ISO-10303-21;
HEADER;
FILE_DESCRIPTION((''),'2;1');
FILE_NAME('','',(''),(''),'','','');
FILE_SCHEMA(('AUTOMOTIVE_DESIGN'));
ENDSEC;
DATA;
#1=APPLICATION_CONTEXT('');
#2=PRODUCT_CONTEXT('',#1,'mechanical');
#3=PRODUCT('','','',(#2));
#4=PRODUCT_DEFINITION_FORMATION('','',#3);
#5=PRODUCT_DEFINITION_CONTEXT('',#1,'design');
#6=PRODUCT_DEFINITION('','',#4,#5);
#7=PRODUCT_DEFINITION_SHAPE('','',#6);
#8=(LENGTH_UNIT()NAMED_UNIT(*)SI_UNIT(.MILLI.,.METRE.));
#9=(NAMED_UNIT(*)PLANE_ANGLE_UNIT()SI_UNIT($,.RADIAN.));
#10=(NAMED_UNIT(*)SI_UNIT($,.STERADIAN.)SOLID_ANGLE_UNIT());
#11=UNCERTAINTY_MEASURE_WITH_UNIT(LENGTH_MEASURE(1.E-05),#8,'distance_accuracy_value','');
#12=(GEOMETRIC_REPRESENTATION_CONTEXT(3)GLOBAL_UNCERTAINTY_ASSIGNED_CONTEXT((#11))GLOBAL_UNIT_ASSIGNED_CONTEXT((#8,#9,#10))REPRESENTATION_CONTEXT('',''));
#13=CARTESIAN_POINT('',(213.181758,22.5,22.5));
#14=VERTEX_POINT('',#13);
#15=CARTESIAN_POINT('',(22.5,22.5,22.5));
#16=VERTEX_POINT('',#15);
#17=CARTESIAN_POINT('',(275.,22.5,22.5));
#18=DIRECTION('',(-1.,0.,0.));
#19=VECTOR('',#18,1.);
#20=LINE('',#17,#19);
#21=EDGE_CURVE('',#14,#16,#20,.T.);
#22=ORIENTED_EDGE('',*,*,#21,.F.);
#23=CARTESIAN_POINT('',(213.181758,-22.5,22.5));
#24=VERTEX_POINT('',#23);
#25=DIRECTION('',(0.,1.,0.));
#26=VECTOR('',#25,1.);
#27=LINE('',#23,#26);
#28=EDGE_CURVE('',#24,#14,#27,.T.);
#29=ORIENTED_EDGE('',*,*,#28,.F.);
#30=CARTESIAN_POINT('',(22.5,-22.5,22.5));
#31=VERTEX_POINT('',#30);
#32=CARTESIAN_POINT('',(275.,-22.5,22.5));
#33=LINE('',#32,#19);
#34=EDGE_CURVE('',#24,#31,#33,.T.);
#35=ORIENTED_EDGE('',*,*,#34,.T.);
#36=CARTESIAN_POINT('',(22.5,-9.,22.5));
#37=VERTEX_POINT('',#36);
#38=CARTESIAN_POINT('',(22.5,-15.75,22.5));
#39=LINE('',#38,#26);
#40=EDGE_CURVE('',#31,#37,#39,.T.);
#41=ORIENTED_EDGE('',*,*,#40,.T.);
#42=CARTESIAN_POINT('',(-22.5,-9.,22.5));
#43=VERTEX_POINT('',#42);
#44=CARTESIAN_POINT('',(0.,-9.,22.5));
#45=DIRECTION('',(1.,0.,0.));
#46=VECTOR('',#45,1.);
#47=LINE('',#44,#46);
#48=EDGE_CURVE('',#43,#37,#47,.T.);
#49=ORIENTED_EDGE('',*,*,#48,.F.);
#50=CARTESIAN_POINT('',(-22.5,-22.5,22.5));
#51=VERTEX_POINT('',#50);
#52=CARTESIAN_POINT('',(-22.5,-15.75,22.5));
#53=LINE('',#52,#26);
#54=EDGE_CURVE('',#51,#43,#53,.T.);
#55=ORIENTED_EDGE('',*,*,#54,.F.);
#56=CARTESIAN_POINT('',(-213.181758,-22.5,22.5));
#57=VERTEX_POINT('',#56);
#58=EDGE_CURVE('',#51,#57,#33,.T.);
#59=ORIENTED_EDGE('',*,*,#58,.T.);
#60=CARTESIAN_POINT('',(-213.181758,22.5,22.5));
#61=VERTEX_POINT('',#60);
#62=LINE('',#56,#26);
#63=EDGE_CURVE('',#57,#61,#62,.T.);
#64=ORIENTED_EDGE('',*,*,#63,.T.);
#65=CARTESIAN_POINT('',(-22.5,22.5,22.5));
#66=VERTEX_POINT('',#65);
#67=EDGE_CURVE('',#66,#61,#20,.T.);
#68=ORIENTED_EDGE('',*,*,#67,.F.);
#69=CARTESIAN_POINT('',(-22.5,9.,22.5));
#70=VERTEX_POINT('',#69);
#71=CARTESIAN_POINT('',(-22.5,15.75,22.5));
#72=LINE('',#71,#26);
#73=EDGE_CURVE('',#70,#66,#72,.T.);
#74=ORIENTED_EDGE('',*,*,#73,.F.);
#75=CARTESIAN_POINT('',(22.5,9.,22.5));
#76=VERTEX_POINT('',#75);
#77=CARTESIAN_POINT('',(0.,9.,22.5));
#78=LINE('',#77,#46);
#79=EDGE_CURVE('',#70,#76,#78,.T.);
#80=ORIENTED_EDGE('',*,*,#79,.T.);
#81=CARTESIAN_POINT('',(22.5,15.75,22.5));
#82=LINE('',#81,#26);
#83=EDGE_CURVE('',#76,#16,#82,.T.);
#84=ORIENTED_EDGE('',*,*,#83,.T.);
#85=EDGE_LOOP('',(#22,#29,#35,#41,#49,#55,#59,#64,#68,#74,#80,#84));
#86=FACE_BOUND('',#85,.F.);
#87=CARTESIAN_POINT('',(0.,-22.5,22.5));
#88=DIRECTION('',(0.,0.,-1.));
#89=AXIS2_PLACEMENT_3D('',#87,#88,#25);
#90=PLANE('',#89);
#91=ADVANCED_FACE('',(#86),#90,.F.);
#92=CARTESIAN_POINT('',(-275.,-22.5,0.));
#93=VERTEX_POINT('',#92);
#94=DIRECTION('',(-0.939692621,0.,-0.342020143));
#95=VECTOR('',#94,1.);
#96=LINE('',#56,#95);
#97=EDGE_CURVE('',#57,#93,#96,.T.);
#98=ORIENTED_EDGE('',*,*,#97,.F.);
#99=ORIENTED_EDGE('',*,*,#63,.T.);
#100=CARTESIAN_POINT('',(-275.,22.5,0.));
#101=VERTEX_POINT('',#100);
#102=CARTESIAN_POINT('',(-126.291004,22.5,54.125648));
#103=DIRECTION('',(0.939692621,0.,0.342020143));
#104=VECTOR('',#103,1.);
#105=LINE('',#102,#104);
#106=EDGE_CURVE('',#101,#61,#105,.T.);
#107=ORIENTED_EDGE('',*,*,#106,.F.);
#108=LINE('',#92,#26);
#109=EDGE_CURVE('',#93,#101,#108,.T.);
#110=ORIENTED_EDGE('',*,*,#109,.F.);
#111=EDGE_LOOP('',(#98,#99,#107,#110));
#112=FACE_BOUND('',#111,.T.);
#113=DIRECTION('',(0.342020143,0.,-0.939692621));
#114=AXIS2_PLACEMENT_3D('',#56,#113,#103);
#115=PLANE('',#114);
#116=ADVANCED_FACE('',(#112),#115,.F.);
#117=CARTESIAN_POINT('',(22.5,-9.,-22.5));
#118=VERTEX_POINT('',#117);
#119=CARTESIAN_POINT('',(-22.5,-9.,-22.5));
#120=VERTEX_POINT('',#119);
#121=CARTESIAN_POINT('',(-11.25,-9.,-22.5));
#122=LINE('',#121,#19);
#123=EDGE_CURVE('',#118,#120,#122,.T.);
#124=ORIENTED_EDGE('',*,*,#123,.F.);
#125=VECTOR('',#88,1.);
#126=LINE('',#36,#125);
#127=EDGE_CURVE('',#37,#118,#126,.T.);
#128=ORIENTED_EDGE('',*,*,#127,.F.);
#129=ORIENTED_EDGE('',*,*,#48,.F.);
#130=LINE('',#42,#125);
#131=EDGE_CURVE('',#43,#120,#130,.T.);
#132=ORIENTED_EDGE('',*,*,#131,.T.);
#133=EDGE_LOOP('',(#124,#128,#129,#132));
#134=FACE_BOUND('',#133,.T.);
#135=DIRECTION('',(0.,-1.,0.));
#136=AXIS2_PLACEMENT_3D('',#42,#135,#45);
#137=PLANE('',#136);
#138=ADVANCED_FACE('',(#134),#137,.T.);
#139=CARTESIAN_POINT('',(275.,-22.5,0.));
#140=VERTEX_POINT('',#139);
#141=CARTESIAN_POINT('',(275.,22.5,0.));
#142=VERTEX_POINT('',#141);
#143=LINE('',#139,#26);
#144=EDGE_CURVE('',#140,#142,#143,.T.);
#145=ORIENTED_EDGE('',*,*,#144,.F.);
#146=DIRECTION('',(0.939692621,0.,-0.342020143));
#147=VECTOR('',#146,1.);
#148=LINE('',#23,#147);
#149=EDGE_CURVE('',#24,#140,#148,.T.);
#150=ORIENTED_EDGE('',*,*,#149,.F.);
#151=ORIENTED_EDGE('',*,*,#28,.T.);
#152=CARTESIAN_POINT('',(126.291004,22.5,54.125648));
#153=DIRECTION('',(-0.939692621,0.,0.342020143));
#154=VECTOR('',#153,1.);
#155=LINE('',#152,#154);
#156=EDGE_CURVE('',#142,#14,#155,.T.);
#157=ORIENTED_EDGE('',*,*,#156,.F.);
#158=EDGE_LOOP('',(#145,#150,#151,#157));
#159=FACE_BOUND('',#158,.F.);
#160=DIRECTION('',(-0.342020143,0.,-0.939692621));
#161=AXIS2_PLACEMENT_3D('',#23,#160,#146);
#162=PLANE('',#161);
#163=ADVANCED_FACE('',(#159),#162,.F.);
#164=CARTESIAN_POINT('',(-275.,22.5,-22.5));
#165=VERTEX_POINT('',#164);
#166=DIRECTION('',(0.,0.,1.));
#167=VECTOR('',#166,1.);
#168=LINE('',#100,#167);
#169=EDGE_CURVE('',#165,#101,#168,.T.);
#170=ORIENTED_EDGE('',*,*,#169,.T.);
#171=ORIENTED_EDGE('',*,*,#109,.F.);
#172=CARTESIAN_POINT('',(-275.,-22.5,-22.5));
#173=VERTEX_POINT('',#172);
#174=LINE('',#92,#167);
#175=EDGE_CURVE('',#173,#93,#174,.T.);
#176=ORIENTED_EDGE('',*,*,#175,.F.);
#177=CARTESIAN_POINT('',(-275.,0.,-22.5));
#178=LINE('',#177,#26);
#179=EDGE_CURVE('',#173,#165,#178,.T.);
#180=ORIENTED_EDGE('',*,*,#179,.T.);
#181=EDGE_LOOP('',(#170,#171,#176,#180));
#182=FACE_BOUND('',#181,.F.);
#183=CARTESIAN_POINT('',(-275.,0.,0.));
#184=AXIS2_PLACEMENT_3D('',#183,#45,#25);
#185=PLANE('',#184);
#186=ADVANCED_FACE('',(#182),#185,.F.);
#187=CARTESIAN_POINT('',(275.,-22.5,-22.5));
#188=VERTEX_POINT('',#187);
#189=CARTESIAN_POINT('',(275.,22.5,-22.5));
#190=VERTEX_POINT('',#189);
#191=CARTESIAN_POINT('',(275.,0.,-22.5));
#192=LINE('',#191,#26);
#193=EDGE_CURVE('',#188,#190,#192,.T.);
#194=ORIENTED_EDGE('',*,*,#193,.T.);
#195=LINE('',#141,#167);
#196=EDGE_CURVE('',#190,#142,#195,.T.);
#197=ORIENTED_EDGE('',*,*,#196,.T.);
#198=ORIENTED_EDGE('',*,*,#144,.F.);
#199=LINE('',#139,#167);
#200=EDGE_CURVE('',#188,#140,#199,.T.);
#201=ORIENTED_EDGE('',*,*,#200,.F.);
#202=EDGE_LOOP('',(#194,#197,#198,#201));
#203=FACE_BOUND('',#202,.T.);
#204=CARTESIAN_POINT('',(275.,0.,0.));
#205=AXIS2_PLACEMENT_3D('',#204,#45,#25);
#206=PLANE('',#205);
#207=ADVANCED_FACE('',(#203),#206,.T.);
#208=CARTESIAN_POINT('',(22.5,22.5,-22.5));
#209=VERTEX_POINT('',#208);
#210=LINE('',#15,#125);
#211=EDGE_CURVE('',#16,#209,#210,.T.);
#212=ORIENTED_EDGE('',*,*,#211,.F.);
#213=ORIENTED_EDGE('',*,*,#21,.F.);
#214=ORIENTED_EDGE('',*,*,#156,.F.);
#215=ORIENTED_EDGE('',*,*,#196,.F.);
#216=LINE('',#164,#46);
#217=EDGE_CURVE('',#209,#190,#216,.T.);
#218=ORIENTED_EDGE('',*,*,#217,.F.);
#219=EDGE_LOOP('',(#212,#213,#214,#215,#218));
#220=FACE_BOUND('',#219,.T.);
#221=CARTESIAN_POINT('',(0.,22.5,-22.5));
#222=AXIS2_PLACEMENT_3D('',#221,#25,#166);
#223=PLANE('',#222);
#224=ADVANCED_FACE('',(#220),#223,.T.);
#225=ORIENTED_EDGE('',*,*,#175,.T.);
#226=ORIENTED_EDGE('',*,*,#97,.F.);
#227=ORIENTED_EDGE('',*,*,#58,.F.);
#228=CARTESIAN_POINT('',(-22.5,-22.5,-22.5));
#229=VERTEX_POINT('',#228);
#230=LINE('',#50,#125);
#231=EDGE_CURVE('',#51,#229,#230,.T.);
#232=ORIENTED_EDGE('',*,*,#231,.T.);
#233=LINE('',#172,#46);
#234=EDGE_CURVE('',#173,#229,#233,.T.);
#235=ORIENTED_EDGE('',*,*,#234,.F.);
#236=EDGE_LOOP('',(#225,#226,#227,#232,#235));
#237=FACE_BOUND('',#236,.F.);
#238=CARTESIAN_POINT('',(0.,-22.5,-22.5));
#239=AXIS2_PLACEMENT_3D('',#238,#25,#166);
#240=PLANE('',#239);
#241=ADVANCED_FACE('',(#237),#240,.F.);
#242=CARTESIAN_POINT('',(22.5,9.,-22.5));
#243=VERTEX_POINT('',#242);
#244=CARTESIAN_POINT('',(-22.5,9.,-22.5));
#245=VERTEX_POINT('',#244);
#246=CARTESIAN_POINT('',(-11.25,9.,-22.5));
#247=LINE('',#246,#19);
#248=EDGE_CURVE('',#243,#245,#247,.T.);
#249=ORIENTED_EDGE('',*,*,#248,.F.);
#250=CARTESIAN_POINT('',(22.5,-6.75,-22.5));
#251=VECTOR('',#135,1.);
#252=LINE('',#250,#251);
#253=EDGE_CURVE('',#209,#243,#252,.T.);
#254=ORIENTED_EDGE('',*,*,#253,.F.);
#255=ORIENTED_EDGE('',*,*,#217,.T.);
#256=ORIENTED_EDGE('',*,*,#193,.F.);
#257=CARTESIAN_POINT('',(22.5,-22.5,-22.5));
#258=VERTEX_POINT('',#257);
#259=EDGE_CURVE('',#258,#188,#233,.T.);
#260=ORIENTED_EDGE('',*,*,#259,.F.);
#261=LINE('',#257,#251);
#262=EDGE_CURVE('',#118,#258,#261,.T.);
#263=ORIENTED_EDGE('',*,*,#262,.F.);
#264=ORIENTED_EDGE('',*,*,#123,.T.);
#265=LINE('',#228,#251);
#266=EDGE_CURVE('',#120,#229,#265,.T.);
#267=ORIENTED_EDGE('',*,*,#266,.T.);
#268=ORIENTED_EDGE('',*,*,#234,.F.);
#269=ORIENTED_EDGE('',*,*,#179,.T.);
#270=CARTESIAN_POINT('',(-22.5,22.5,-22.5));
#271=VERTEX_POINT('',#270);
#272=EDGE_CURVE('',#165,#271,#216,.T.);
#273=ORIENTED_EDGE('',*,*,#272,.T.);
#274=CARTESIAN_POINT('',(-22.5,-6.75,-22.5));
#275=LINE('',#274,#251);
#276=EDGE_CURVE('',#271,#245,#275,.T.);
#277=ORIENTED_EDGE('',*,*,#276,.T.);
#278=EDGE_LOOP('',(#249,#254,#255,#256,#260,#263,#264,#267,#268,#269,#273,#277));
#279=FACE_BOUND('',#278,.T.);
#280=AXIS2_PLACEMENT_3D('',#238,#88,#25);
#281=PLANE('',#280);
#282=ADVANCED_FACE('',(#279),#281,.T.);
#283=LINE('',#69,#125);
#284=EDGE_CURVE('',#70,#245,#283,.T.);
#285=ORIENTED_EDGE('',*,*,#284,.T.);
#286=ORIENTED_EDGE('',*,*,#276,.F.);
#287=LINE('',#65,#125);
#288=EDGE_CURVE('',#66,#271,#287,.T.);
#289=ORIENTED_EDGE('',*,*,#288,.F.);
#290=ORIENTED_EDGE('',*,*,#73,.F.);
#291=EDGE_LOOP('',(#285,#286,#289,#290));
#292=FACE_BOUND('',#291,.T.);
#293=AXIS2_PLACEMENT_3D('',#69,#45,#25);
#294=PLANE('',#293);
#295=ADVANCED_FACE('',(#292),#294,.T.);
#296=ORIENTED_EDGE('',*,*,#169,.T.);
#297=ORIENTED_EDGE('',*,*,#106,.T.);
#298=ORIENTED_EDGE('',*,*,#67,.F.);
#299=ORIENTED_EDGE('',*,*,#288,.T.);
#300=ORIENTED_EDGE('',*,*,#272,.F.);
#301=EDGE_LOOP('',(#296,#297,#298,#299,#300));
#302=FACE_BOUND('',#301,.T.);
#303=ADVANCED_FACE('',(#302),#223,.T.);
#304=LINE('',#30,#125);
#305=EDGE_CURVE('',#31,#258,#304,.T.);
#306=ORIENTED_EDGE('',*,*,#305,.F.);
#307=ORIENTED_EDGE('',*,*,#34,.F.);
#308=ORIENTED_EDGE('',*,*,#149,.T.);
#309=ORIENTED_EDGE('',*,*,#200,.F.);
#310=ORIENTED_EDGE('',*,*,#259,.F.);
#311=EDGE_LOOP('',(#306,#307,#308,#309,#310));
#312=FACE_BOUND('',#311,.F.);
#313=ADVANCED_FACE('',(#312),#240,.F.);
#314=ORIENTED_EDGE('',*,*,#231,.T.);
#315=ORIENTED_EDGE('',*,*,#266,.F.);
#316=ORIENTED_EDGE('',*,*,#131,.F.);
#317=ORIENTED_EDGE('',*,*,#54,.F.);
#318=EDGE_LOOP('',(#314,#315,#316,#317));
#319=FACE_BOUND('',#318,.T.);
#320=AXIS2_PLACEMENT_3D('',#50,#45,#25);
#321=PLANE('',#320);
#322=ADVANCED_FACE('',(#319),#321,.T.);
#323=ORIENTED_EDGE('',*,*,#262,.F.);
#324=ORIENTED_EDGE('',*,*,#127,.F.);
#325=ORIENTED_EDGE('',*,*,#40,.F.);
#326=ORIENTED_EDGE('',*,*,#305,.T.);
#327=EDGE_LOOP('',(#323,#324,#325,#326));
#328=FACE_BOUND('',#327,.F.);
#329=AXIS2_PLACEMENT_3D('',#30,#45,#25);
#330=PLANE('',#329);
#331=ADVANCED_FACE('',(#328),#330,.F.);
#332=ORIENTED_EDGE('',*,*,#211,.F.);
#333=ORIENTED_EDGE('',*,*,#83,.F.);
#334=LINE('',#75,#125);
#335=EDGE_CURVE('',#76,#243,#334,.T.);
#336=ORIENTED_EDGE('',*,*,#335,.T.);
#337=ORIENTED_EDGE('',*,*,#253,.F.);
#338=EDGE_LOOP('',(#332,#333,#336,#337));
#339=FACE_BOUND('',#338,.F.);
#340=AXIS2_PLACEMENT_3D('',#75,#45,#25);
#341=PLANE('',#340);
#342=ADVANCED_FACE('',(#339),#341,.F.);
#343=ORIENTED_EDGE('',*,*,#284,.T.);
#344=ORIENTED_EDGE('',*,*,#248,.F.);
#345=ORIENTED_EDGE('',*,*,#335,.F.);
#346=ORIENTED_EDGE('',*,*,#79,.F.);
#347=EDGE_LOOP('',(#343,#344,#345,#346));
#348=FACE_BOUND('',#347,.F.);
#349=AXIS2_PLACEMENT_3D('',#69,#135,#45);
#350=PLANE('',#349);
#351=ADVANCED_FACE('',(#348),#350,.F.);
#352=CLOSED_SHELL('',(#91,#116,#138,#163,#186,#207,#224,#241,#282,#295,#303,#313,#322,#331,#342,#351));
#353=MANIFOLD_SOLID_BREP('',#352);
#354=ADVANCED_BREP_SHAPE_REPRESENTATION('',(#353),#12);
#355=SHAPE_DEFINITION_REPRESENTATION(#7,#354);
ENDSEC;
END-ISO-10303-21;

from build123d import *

# Parameters (mm, degrees)
F0_W     = 45
F0_H     = 45
F1_DEPTH = 275
F2_W     = 45
F2_H     = 13.5
F3_DEPTH = 45.001
F5_DEPTH = 45.001


# Not quite as in the source:
# - a pattern or mirror of a feature is missing from the dataset's text; its kind, count and spacing are read off the source's solid


with BuildPart() as f1:
    # F0 (on Right) → F1 (new body, symmetric)
    with BuildSketch(Plane.YZ):
        Rectangle(F0_W, F0_H)
    extrude(amount=F1_DEPTH, both=True)

    # F2 (on face) → F3 (cut, through all)
    with BuildSketch(Plane.XY.offset(22.5)):
        with Locations((0, 15.75)):
            Rectangle(F2_W, F2_H)
        with Locations((0, -15.75)):
            Rectangle(F2_W, F2_H)
    extrude(amount=-F3_DEPTH, mode=Mode.SUBTRACT)

    # F4 (on face) → F5 (cut, through all)
    with BuildSketch(Plane.XZ.offset(22.5)):
        Polygon((275, 22.5), (213.1817580623, 22.5), (275, 0), align=None)
    f5 = extrude(amount=-F5_DEPTH, mode=Mode.SUBTRACT)

    # F5_copies: F5 across plane
    add(f5.mirror(Plane(origin=(0, 0, 0), x_dir=(0, 0, -1), z_dir=(-1, 0, 0))), mode=Mode.SUBTRACT)


solid = f1.part
